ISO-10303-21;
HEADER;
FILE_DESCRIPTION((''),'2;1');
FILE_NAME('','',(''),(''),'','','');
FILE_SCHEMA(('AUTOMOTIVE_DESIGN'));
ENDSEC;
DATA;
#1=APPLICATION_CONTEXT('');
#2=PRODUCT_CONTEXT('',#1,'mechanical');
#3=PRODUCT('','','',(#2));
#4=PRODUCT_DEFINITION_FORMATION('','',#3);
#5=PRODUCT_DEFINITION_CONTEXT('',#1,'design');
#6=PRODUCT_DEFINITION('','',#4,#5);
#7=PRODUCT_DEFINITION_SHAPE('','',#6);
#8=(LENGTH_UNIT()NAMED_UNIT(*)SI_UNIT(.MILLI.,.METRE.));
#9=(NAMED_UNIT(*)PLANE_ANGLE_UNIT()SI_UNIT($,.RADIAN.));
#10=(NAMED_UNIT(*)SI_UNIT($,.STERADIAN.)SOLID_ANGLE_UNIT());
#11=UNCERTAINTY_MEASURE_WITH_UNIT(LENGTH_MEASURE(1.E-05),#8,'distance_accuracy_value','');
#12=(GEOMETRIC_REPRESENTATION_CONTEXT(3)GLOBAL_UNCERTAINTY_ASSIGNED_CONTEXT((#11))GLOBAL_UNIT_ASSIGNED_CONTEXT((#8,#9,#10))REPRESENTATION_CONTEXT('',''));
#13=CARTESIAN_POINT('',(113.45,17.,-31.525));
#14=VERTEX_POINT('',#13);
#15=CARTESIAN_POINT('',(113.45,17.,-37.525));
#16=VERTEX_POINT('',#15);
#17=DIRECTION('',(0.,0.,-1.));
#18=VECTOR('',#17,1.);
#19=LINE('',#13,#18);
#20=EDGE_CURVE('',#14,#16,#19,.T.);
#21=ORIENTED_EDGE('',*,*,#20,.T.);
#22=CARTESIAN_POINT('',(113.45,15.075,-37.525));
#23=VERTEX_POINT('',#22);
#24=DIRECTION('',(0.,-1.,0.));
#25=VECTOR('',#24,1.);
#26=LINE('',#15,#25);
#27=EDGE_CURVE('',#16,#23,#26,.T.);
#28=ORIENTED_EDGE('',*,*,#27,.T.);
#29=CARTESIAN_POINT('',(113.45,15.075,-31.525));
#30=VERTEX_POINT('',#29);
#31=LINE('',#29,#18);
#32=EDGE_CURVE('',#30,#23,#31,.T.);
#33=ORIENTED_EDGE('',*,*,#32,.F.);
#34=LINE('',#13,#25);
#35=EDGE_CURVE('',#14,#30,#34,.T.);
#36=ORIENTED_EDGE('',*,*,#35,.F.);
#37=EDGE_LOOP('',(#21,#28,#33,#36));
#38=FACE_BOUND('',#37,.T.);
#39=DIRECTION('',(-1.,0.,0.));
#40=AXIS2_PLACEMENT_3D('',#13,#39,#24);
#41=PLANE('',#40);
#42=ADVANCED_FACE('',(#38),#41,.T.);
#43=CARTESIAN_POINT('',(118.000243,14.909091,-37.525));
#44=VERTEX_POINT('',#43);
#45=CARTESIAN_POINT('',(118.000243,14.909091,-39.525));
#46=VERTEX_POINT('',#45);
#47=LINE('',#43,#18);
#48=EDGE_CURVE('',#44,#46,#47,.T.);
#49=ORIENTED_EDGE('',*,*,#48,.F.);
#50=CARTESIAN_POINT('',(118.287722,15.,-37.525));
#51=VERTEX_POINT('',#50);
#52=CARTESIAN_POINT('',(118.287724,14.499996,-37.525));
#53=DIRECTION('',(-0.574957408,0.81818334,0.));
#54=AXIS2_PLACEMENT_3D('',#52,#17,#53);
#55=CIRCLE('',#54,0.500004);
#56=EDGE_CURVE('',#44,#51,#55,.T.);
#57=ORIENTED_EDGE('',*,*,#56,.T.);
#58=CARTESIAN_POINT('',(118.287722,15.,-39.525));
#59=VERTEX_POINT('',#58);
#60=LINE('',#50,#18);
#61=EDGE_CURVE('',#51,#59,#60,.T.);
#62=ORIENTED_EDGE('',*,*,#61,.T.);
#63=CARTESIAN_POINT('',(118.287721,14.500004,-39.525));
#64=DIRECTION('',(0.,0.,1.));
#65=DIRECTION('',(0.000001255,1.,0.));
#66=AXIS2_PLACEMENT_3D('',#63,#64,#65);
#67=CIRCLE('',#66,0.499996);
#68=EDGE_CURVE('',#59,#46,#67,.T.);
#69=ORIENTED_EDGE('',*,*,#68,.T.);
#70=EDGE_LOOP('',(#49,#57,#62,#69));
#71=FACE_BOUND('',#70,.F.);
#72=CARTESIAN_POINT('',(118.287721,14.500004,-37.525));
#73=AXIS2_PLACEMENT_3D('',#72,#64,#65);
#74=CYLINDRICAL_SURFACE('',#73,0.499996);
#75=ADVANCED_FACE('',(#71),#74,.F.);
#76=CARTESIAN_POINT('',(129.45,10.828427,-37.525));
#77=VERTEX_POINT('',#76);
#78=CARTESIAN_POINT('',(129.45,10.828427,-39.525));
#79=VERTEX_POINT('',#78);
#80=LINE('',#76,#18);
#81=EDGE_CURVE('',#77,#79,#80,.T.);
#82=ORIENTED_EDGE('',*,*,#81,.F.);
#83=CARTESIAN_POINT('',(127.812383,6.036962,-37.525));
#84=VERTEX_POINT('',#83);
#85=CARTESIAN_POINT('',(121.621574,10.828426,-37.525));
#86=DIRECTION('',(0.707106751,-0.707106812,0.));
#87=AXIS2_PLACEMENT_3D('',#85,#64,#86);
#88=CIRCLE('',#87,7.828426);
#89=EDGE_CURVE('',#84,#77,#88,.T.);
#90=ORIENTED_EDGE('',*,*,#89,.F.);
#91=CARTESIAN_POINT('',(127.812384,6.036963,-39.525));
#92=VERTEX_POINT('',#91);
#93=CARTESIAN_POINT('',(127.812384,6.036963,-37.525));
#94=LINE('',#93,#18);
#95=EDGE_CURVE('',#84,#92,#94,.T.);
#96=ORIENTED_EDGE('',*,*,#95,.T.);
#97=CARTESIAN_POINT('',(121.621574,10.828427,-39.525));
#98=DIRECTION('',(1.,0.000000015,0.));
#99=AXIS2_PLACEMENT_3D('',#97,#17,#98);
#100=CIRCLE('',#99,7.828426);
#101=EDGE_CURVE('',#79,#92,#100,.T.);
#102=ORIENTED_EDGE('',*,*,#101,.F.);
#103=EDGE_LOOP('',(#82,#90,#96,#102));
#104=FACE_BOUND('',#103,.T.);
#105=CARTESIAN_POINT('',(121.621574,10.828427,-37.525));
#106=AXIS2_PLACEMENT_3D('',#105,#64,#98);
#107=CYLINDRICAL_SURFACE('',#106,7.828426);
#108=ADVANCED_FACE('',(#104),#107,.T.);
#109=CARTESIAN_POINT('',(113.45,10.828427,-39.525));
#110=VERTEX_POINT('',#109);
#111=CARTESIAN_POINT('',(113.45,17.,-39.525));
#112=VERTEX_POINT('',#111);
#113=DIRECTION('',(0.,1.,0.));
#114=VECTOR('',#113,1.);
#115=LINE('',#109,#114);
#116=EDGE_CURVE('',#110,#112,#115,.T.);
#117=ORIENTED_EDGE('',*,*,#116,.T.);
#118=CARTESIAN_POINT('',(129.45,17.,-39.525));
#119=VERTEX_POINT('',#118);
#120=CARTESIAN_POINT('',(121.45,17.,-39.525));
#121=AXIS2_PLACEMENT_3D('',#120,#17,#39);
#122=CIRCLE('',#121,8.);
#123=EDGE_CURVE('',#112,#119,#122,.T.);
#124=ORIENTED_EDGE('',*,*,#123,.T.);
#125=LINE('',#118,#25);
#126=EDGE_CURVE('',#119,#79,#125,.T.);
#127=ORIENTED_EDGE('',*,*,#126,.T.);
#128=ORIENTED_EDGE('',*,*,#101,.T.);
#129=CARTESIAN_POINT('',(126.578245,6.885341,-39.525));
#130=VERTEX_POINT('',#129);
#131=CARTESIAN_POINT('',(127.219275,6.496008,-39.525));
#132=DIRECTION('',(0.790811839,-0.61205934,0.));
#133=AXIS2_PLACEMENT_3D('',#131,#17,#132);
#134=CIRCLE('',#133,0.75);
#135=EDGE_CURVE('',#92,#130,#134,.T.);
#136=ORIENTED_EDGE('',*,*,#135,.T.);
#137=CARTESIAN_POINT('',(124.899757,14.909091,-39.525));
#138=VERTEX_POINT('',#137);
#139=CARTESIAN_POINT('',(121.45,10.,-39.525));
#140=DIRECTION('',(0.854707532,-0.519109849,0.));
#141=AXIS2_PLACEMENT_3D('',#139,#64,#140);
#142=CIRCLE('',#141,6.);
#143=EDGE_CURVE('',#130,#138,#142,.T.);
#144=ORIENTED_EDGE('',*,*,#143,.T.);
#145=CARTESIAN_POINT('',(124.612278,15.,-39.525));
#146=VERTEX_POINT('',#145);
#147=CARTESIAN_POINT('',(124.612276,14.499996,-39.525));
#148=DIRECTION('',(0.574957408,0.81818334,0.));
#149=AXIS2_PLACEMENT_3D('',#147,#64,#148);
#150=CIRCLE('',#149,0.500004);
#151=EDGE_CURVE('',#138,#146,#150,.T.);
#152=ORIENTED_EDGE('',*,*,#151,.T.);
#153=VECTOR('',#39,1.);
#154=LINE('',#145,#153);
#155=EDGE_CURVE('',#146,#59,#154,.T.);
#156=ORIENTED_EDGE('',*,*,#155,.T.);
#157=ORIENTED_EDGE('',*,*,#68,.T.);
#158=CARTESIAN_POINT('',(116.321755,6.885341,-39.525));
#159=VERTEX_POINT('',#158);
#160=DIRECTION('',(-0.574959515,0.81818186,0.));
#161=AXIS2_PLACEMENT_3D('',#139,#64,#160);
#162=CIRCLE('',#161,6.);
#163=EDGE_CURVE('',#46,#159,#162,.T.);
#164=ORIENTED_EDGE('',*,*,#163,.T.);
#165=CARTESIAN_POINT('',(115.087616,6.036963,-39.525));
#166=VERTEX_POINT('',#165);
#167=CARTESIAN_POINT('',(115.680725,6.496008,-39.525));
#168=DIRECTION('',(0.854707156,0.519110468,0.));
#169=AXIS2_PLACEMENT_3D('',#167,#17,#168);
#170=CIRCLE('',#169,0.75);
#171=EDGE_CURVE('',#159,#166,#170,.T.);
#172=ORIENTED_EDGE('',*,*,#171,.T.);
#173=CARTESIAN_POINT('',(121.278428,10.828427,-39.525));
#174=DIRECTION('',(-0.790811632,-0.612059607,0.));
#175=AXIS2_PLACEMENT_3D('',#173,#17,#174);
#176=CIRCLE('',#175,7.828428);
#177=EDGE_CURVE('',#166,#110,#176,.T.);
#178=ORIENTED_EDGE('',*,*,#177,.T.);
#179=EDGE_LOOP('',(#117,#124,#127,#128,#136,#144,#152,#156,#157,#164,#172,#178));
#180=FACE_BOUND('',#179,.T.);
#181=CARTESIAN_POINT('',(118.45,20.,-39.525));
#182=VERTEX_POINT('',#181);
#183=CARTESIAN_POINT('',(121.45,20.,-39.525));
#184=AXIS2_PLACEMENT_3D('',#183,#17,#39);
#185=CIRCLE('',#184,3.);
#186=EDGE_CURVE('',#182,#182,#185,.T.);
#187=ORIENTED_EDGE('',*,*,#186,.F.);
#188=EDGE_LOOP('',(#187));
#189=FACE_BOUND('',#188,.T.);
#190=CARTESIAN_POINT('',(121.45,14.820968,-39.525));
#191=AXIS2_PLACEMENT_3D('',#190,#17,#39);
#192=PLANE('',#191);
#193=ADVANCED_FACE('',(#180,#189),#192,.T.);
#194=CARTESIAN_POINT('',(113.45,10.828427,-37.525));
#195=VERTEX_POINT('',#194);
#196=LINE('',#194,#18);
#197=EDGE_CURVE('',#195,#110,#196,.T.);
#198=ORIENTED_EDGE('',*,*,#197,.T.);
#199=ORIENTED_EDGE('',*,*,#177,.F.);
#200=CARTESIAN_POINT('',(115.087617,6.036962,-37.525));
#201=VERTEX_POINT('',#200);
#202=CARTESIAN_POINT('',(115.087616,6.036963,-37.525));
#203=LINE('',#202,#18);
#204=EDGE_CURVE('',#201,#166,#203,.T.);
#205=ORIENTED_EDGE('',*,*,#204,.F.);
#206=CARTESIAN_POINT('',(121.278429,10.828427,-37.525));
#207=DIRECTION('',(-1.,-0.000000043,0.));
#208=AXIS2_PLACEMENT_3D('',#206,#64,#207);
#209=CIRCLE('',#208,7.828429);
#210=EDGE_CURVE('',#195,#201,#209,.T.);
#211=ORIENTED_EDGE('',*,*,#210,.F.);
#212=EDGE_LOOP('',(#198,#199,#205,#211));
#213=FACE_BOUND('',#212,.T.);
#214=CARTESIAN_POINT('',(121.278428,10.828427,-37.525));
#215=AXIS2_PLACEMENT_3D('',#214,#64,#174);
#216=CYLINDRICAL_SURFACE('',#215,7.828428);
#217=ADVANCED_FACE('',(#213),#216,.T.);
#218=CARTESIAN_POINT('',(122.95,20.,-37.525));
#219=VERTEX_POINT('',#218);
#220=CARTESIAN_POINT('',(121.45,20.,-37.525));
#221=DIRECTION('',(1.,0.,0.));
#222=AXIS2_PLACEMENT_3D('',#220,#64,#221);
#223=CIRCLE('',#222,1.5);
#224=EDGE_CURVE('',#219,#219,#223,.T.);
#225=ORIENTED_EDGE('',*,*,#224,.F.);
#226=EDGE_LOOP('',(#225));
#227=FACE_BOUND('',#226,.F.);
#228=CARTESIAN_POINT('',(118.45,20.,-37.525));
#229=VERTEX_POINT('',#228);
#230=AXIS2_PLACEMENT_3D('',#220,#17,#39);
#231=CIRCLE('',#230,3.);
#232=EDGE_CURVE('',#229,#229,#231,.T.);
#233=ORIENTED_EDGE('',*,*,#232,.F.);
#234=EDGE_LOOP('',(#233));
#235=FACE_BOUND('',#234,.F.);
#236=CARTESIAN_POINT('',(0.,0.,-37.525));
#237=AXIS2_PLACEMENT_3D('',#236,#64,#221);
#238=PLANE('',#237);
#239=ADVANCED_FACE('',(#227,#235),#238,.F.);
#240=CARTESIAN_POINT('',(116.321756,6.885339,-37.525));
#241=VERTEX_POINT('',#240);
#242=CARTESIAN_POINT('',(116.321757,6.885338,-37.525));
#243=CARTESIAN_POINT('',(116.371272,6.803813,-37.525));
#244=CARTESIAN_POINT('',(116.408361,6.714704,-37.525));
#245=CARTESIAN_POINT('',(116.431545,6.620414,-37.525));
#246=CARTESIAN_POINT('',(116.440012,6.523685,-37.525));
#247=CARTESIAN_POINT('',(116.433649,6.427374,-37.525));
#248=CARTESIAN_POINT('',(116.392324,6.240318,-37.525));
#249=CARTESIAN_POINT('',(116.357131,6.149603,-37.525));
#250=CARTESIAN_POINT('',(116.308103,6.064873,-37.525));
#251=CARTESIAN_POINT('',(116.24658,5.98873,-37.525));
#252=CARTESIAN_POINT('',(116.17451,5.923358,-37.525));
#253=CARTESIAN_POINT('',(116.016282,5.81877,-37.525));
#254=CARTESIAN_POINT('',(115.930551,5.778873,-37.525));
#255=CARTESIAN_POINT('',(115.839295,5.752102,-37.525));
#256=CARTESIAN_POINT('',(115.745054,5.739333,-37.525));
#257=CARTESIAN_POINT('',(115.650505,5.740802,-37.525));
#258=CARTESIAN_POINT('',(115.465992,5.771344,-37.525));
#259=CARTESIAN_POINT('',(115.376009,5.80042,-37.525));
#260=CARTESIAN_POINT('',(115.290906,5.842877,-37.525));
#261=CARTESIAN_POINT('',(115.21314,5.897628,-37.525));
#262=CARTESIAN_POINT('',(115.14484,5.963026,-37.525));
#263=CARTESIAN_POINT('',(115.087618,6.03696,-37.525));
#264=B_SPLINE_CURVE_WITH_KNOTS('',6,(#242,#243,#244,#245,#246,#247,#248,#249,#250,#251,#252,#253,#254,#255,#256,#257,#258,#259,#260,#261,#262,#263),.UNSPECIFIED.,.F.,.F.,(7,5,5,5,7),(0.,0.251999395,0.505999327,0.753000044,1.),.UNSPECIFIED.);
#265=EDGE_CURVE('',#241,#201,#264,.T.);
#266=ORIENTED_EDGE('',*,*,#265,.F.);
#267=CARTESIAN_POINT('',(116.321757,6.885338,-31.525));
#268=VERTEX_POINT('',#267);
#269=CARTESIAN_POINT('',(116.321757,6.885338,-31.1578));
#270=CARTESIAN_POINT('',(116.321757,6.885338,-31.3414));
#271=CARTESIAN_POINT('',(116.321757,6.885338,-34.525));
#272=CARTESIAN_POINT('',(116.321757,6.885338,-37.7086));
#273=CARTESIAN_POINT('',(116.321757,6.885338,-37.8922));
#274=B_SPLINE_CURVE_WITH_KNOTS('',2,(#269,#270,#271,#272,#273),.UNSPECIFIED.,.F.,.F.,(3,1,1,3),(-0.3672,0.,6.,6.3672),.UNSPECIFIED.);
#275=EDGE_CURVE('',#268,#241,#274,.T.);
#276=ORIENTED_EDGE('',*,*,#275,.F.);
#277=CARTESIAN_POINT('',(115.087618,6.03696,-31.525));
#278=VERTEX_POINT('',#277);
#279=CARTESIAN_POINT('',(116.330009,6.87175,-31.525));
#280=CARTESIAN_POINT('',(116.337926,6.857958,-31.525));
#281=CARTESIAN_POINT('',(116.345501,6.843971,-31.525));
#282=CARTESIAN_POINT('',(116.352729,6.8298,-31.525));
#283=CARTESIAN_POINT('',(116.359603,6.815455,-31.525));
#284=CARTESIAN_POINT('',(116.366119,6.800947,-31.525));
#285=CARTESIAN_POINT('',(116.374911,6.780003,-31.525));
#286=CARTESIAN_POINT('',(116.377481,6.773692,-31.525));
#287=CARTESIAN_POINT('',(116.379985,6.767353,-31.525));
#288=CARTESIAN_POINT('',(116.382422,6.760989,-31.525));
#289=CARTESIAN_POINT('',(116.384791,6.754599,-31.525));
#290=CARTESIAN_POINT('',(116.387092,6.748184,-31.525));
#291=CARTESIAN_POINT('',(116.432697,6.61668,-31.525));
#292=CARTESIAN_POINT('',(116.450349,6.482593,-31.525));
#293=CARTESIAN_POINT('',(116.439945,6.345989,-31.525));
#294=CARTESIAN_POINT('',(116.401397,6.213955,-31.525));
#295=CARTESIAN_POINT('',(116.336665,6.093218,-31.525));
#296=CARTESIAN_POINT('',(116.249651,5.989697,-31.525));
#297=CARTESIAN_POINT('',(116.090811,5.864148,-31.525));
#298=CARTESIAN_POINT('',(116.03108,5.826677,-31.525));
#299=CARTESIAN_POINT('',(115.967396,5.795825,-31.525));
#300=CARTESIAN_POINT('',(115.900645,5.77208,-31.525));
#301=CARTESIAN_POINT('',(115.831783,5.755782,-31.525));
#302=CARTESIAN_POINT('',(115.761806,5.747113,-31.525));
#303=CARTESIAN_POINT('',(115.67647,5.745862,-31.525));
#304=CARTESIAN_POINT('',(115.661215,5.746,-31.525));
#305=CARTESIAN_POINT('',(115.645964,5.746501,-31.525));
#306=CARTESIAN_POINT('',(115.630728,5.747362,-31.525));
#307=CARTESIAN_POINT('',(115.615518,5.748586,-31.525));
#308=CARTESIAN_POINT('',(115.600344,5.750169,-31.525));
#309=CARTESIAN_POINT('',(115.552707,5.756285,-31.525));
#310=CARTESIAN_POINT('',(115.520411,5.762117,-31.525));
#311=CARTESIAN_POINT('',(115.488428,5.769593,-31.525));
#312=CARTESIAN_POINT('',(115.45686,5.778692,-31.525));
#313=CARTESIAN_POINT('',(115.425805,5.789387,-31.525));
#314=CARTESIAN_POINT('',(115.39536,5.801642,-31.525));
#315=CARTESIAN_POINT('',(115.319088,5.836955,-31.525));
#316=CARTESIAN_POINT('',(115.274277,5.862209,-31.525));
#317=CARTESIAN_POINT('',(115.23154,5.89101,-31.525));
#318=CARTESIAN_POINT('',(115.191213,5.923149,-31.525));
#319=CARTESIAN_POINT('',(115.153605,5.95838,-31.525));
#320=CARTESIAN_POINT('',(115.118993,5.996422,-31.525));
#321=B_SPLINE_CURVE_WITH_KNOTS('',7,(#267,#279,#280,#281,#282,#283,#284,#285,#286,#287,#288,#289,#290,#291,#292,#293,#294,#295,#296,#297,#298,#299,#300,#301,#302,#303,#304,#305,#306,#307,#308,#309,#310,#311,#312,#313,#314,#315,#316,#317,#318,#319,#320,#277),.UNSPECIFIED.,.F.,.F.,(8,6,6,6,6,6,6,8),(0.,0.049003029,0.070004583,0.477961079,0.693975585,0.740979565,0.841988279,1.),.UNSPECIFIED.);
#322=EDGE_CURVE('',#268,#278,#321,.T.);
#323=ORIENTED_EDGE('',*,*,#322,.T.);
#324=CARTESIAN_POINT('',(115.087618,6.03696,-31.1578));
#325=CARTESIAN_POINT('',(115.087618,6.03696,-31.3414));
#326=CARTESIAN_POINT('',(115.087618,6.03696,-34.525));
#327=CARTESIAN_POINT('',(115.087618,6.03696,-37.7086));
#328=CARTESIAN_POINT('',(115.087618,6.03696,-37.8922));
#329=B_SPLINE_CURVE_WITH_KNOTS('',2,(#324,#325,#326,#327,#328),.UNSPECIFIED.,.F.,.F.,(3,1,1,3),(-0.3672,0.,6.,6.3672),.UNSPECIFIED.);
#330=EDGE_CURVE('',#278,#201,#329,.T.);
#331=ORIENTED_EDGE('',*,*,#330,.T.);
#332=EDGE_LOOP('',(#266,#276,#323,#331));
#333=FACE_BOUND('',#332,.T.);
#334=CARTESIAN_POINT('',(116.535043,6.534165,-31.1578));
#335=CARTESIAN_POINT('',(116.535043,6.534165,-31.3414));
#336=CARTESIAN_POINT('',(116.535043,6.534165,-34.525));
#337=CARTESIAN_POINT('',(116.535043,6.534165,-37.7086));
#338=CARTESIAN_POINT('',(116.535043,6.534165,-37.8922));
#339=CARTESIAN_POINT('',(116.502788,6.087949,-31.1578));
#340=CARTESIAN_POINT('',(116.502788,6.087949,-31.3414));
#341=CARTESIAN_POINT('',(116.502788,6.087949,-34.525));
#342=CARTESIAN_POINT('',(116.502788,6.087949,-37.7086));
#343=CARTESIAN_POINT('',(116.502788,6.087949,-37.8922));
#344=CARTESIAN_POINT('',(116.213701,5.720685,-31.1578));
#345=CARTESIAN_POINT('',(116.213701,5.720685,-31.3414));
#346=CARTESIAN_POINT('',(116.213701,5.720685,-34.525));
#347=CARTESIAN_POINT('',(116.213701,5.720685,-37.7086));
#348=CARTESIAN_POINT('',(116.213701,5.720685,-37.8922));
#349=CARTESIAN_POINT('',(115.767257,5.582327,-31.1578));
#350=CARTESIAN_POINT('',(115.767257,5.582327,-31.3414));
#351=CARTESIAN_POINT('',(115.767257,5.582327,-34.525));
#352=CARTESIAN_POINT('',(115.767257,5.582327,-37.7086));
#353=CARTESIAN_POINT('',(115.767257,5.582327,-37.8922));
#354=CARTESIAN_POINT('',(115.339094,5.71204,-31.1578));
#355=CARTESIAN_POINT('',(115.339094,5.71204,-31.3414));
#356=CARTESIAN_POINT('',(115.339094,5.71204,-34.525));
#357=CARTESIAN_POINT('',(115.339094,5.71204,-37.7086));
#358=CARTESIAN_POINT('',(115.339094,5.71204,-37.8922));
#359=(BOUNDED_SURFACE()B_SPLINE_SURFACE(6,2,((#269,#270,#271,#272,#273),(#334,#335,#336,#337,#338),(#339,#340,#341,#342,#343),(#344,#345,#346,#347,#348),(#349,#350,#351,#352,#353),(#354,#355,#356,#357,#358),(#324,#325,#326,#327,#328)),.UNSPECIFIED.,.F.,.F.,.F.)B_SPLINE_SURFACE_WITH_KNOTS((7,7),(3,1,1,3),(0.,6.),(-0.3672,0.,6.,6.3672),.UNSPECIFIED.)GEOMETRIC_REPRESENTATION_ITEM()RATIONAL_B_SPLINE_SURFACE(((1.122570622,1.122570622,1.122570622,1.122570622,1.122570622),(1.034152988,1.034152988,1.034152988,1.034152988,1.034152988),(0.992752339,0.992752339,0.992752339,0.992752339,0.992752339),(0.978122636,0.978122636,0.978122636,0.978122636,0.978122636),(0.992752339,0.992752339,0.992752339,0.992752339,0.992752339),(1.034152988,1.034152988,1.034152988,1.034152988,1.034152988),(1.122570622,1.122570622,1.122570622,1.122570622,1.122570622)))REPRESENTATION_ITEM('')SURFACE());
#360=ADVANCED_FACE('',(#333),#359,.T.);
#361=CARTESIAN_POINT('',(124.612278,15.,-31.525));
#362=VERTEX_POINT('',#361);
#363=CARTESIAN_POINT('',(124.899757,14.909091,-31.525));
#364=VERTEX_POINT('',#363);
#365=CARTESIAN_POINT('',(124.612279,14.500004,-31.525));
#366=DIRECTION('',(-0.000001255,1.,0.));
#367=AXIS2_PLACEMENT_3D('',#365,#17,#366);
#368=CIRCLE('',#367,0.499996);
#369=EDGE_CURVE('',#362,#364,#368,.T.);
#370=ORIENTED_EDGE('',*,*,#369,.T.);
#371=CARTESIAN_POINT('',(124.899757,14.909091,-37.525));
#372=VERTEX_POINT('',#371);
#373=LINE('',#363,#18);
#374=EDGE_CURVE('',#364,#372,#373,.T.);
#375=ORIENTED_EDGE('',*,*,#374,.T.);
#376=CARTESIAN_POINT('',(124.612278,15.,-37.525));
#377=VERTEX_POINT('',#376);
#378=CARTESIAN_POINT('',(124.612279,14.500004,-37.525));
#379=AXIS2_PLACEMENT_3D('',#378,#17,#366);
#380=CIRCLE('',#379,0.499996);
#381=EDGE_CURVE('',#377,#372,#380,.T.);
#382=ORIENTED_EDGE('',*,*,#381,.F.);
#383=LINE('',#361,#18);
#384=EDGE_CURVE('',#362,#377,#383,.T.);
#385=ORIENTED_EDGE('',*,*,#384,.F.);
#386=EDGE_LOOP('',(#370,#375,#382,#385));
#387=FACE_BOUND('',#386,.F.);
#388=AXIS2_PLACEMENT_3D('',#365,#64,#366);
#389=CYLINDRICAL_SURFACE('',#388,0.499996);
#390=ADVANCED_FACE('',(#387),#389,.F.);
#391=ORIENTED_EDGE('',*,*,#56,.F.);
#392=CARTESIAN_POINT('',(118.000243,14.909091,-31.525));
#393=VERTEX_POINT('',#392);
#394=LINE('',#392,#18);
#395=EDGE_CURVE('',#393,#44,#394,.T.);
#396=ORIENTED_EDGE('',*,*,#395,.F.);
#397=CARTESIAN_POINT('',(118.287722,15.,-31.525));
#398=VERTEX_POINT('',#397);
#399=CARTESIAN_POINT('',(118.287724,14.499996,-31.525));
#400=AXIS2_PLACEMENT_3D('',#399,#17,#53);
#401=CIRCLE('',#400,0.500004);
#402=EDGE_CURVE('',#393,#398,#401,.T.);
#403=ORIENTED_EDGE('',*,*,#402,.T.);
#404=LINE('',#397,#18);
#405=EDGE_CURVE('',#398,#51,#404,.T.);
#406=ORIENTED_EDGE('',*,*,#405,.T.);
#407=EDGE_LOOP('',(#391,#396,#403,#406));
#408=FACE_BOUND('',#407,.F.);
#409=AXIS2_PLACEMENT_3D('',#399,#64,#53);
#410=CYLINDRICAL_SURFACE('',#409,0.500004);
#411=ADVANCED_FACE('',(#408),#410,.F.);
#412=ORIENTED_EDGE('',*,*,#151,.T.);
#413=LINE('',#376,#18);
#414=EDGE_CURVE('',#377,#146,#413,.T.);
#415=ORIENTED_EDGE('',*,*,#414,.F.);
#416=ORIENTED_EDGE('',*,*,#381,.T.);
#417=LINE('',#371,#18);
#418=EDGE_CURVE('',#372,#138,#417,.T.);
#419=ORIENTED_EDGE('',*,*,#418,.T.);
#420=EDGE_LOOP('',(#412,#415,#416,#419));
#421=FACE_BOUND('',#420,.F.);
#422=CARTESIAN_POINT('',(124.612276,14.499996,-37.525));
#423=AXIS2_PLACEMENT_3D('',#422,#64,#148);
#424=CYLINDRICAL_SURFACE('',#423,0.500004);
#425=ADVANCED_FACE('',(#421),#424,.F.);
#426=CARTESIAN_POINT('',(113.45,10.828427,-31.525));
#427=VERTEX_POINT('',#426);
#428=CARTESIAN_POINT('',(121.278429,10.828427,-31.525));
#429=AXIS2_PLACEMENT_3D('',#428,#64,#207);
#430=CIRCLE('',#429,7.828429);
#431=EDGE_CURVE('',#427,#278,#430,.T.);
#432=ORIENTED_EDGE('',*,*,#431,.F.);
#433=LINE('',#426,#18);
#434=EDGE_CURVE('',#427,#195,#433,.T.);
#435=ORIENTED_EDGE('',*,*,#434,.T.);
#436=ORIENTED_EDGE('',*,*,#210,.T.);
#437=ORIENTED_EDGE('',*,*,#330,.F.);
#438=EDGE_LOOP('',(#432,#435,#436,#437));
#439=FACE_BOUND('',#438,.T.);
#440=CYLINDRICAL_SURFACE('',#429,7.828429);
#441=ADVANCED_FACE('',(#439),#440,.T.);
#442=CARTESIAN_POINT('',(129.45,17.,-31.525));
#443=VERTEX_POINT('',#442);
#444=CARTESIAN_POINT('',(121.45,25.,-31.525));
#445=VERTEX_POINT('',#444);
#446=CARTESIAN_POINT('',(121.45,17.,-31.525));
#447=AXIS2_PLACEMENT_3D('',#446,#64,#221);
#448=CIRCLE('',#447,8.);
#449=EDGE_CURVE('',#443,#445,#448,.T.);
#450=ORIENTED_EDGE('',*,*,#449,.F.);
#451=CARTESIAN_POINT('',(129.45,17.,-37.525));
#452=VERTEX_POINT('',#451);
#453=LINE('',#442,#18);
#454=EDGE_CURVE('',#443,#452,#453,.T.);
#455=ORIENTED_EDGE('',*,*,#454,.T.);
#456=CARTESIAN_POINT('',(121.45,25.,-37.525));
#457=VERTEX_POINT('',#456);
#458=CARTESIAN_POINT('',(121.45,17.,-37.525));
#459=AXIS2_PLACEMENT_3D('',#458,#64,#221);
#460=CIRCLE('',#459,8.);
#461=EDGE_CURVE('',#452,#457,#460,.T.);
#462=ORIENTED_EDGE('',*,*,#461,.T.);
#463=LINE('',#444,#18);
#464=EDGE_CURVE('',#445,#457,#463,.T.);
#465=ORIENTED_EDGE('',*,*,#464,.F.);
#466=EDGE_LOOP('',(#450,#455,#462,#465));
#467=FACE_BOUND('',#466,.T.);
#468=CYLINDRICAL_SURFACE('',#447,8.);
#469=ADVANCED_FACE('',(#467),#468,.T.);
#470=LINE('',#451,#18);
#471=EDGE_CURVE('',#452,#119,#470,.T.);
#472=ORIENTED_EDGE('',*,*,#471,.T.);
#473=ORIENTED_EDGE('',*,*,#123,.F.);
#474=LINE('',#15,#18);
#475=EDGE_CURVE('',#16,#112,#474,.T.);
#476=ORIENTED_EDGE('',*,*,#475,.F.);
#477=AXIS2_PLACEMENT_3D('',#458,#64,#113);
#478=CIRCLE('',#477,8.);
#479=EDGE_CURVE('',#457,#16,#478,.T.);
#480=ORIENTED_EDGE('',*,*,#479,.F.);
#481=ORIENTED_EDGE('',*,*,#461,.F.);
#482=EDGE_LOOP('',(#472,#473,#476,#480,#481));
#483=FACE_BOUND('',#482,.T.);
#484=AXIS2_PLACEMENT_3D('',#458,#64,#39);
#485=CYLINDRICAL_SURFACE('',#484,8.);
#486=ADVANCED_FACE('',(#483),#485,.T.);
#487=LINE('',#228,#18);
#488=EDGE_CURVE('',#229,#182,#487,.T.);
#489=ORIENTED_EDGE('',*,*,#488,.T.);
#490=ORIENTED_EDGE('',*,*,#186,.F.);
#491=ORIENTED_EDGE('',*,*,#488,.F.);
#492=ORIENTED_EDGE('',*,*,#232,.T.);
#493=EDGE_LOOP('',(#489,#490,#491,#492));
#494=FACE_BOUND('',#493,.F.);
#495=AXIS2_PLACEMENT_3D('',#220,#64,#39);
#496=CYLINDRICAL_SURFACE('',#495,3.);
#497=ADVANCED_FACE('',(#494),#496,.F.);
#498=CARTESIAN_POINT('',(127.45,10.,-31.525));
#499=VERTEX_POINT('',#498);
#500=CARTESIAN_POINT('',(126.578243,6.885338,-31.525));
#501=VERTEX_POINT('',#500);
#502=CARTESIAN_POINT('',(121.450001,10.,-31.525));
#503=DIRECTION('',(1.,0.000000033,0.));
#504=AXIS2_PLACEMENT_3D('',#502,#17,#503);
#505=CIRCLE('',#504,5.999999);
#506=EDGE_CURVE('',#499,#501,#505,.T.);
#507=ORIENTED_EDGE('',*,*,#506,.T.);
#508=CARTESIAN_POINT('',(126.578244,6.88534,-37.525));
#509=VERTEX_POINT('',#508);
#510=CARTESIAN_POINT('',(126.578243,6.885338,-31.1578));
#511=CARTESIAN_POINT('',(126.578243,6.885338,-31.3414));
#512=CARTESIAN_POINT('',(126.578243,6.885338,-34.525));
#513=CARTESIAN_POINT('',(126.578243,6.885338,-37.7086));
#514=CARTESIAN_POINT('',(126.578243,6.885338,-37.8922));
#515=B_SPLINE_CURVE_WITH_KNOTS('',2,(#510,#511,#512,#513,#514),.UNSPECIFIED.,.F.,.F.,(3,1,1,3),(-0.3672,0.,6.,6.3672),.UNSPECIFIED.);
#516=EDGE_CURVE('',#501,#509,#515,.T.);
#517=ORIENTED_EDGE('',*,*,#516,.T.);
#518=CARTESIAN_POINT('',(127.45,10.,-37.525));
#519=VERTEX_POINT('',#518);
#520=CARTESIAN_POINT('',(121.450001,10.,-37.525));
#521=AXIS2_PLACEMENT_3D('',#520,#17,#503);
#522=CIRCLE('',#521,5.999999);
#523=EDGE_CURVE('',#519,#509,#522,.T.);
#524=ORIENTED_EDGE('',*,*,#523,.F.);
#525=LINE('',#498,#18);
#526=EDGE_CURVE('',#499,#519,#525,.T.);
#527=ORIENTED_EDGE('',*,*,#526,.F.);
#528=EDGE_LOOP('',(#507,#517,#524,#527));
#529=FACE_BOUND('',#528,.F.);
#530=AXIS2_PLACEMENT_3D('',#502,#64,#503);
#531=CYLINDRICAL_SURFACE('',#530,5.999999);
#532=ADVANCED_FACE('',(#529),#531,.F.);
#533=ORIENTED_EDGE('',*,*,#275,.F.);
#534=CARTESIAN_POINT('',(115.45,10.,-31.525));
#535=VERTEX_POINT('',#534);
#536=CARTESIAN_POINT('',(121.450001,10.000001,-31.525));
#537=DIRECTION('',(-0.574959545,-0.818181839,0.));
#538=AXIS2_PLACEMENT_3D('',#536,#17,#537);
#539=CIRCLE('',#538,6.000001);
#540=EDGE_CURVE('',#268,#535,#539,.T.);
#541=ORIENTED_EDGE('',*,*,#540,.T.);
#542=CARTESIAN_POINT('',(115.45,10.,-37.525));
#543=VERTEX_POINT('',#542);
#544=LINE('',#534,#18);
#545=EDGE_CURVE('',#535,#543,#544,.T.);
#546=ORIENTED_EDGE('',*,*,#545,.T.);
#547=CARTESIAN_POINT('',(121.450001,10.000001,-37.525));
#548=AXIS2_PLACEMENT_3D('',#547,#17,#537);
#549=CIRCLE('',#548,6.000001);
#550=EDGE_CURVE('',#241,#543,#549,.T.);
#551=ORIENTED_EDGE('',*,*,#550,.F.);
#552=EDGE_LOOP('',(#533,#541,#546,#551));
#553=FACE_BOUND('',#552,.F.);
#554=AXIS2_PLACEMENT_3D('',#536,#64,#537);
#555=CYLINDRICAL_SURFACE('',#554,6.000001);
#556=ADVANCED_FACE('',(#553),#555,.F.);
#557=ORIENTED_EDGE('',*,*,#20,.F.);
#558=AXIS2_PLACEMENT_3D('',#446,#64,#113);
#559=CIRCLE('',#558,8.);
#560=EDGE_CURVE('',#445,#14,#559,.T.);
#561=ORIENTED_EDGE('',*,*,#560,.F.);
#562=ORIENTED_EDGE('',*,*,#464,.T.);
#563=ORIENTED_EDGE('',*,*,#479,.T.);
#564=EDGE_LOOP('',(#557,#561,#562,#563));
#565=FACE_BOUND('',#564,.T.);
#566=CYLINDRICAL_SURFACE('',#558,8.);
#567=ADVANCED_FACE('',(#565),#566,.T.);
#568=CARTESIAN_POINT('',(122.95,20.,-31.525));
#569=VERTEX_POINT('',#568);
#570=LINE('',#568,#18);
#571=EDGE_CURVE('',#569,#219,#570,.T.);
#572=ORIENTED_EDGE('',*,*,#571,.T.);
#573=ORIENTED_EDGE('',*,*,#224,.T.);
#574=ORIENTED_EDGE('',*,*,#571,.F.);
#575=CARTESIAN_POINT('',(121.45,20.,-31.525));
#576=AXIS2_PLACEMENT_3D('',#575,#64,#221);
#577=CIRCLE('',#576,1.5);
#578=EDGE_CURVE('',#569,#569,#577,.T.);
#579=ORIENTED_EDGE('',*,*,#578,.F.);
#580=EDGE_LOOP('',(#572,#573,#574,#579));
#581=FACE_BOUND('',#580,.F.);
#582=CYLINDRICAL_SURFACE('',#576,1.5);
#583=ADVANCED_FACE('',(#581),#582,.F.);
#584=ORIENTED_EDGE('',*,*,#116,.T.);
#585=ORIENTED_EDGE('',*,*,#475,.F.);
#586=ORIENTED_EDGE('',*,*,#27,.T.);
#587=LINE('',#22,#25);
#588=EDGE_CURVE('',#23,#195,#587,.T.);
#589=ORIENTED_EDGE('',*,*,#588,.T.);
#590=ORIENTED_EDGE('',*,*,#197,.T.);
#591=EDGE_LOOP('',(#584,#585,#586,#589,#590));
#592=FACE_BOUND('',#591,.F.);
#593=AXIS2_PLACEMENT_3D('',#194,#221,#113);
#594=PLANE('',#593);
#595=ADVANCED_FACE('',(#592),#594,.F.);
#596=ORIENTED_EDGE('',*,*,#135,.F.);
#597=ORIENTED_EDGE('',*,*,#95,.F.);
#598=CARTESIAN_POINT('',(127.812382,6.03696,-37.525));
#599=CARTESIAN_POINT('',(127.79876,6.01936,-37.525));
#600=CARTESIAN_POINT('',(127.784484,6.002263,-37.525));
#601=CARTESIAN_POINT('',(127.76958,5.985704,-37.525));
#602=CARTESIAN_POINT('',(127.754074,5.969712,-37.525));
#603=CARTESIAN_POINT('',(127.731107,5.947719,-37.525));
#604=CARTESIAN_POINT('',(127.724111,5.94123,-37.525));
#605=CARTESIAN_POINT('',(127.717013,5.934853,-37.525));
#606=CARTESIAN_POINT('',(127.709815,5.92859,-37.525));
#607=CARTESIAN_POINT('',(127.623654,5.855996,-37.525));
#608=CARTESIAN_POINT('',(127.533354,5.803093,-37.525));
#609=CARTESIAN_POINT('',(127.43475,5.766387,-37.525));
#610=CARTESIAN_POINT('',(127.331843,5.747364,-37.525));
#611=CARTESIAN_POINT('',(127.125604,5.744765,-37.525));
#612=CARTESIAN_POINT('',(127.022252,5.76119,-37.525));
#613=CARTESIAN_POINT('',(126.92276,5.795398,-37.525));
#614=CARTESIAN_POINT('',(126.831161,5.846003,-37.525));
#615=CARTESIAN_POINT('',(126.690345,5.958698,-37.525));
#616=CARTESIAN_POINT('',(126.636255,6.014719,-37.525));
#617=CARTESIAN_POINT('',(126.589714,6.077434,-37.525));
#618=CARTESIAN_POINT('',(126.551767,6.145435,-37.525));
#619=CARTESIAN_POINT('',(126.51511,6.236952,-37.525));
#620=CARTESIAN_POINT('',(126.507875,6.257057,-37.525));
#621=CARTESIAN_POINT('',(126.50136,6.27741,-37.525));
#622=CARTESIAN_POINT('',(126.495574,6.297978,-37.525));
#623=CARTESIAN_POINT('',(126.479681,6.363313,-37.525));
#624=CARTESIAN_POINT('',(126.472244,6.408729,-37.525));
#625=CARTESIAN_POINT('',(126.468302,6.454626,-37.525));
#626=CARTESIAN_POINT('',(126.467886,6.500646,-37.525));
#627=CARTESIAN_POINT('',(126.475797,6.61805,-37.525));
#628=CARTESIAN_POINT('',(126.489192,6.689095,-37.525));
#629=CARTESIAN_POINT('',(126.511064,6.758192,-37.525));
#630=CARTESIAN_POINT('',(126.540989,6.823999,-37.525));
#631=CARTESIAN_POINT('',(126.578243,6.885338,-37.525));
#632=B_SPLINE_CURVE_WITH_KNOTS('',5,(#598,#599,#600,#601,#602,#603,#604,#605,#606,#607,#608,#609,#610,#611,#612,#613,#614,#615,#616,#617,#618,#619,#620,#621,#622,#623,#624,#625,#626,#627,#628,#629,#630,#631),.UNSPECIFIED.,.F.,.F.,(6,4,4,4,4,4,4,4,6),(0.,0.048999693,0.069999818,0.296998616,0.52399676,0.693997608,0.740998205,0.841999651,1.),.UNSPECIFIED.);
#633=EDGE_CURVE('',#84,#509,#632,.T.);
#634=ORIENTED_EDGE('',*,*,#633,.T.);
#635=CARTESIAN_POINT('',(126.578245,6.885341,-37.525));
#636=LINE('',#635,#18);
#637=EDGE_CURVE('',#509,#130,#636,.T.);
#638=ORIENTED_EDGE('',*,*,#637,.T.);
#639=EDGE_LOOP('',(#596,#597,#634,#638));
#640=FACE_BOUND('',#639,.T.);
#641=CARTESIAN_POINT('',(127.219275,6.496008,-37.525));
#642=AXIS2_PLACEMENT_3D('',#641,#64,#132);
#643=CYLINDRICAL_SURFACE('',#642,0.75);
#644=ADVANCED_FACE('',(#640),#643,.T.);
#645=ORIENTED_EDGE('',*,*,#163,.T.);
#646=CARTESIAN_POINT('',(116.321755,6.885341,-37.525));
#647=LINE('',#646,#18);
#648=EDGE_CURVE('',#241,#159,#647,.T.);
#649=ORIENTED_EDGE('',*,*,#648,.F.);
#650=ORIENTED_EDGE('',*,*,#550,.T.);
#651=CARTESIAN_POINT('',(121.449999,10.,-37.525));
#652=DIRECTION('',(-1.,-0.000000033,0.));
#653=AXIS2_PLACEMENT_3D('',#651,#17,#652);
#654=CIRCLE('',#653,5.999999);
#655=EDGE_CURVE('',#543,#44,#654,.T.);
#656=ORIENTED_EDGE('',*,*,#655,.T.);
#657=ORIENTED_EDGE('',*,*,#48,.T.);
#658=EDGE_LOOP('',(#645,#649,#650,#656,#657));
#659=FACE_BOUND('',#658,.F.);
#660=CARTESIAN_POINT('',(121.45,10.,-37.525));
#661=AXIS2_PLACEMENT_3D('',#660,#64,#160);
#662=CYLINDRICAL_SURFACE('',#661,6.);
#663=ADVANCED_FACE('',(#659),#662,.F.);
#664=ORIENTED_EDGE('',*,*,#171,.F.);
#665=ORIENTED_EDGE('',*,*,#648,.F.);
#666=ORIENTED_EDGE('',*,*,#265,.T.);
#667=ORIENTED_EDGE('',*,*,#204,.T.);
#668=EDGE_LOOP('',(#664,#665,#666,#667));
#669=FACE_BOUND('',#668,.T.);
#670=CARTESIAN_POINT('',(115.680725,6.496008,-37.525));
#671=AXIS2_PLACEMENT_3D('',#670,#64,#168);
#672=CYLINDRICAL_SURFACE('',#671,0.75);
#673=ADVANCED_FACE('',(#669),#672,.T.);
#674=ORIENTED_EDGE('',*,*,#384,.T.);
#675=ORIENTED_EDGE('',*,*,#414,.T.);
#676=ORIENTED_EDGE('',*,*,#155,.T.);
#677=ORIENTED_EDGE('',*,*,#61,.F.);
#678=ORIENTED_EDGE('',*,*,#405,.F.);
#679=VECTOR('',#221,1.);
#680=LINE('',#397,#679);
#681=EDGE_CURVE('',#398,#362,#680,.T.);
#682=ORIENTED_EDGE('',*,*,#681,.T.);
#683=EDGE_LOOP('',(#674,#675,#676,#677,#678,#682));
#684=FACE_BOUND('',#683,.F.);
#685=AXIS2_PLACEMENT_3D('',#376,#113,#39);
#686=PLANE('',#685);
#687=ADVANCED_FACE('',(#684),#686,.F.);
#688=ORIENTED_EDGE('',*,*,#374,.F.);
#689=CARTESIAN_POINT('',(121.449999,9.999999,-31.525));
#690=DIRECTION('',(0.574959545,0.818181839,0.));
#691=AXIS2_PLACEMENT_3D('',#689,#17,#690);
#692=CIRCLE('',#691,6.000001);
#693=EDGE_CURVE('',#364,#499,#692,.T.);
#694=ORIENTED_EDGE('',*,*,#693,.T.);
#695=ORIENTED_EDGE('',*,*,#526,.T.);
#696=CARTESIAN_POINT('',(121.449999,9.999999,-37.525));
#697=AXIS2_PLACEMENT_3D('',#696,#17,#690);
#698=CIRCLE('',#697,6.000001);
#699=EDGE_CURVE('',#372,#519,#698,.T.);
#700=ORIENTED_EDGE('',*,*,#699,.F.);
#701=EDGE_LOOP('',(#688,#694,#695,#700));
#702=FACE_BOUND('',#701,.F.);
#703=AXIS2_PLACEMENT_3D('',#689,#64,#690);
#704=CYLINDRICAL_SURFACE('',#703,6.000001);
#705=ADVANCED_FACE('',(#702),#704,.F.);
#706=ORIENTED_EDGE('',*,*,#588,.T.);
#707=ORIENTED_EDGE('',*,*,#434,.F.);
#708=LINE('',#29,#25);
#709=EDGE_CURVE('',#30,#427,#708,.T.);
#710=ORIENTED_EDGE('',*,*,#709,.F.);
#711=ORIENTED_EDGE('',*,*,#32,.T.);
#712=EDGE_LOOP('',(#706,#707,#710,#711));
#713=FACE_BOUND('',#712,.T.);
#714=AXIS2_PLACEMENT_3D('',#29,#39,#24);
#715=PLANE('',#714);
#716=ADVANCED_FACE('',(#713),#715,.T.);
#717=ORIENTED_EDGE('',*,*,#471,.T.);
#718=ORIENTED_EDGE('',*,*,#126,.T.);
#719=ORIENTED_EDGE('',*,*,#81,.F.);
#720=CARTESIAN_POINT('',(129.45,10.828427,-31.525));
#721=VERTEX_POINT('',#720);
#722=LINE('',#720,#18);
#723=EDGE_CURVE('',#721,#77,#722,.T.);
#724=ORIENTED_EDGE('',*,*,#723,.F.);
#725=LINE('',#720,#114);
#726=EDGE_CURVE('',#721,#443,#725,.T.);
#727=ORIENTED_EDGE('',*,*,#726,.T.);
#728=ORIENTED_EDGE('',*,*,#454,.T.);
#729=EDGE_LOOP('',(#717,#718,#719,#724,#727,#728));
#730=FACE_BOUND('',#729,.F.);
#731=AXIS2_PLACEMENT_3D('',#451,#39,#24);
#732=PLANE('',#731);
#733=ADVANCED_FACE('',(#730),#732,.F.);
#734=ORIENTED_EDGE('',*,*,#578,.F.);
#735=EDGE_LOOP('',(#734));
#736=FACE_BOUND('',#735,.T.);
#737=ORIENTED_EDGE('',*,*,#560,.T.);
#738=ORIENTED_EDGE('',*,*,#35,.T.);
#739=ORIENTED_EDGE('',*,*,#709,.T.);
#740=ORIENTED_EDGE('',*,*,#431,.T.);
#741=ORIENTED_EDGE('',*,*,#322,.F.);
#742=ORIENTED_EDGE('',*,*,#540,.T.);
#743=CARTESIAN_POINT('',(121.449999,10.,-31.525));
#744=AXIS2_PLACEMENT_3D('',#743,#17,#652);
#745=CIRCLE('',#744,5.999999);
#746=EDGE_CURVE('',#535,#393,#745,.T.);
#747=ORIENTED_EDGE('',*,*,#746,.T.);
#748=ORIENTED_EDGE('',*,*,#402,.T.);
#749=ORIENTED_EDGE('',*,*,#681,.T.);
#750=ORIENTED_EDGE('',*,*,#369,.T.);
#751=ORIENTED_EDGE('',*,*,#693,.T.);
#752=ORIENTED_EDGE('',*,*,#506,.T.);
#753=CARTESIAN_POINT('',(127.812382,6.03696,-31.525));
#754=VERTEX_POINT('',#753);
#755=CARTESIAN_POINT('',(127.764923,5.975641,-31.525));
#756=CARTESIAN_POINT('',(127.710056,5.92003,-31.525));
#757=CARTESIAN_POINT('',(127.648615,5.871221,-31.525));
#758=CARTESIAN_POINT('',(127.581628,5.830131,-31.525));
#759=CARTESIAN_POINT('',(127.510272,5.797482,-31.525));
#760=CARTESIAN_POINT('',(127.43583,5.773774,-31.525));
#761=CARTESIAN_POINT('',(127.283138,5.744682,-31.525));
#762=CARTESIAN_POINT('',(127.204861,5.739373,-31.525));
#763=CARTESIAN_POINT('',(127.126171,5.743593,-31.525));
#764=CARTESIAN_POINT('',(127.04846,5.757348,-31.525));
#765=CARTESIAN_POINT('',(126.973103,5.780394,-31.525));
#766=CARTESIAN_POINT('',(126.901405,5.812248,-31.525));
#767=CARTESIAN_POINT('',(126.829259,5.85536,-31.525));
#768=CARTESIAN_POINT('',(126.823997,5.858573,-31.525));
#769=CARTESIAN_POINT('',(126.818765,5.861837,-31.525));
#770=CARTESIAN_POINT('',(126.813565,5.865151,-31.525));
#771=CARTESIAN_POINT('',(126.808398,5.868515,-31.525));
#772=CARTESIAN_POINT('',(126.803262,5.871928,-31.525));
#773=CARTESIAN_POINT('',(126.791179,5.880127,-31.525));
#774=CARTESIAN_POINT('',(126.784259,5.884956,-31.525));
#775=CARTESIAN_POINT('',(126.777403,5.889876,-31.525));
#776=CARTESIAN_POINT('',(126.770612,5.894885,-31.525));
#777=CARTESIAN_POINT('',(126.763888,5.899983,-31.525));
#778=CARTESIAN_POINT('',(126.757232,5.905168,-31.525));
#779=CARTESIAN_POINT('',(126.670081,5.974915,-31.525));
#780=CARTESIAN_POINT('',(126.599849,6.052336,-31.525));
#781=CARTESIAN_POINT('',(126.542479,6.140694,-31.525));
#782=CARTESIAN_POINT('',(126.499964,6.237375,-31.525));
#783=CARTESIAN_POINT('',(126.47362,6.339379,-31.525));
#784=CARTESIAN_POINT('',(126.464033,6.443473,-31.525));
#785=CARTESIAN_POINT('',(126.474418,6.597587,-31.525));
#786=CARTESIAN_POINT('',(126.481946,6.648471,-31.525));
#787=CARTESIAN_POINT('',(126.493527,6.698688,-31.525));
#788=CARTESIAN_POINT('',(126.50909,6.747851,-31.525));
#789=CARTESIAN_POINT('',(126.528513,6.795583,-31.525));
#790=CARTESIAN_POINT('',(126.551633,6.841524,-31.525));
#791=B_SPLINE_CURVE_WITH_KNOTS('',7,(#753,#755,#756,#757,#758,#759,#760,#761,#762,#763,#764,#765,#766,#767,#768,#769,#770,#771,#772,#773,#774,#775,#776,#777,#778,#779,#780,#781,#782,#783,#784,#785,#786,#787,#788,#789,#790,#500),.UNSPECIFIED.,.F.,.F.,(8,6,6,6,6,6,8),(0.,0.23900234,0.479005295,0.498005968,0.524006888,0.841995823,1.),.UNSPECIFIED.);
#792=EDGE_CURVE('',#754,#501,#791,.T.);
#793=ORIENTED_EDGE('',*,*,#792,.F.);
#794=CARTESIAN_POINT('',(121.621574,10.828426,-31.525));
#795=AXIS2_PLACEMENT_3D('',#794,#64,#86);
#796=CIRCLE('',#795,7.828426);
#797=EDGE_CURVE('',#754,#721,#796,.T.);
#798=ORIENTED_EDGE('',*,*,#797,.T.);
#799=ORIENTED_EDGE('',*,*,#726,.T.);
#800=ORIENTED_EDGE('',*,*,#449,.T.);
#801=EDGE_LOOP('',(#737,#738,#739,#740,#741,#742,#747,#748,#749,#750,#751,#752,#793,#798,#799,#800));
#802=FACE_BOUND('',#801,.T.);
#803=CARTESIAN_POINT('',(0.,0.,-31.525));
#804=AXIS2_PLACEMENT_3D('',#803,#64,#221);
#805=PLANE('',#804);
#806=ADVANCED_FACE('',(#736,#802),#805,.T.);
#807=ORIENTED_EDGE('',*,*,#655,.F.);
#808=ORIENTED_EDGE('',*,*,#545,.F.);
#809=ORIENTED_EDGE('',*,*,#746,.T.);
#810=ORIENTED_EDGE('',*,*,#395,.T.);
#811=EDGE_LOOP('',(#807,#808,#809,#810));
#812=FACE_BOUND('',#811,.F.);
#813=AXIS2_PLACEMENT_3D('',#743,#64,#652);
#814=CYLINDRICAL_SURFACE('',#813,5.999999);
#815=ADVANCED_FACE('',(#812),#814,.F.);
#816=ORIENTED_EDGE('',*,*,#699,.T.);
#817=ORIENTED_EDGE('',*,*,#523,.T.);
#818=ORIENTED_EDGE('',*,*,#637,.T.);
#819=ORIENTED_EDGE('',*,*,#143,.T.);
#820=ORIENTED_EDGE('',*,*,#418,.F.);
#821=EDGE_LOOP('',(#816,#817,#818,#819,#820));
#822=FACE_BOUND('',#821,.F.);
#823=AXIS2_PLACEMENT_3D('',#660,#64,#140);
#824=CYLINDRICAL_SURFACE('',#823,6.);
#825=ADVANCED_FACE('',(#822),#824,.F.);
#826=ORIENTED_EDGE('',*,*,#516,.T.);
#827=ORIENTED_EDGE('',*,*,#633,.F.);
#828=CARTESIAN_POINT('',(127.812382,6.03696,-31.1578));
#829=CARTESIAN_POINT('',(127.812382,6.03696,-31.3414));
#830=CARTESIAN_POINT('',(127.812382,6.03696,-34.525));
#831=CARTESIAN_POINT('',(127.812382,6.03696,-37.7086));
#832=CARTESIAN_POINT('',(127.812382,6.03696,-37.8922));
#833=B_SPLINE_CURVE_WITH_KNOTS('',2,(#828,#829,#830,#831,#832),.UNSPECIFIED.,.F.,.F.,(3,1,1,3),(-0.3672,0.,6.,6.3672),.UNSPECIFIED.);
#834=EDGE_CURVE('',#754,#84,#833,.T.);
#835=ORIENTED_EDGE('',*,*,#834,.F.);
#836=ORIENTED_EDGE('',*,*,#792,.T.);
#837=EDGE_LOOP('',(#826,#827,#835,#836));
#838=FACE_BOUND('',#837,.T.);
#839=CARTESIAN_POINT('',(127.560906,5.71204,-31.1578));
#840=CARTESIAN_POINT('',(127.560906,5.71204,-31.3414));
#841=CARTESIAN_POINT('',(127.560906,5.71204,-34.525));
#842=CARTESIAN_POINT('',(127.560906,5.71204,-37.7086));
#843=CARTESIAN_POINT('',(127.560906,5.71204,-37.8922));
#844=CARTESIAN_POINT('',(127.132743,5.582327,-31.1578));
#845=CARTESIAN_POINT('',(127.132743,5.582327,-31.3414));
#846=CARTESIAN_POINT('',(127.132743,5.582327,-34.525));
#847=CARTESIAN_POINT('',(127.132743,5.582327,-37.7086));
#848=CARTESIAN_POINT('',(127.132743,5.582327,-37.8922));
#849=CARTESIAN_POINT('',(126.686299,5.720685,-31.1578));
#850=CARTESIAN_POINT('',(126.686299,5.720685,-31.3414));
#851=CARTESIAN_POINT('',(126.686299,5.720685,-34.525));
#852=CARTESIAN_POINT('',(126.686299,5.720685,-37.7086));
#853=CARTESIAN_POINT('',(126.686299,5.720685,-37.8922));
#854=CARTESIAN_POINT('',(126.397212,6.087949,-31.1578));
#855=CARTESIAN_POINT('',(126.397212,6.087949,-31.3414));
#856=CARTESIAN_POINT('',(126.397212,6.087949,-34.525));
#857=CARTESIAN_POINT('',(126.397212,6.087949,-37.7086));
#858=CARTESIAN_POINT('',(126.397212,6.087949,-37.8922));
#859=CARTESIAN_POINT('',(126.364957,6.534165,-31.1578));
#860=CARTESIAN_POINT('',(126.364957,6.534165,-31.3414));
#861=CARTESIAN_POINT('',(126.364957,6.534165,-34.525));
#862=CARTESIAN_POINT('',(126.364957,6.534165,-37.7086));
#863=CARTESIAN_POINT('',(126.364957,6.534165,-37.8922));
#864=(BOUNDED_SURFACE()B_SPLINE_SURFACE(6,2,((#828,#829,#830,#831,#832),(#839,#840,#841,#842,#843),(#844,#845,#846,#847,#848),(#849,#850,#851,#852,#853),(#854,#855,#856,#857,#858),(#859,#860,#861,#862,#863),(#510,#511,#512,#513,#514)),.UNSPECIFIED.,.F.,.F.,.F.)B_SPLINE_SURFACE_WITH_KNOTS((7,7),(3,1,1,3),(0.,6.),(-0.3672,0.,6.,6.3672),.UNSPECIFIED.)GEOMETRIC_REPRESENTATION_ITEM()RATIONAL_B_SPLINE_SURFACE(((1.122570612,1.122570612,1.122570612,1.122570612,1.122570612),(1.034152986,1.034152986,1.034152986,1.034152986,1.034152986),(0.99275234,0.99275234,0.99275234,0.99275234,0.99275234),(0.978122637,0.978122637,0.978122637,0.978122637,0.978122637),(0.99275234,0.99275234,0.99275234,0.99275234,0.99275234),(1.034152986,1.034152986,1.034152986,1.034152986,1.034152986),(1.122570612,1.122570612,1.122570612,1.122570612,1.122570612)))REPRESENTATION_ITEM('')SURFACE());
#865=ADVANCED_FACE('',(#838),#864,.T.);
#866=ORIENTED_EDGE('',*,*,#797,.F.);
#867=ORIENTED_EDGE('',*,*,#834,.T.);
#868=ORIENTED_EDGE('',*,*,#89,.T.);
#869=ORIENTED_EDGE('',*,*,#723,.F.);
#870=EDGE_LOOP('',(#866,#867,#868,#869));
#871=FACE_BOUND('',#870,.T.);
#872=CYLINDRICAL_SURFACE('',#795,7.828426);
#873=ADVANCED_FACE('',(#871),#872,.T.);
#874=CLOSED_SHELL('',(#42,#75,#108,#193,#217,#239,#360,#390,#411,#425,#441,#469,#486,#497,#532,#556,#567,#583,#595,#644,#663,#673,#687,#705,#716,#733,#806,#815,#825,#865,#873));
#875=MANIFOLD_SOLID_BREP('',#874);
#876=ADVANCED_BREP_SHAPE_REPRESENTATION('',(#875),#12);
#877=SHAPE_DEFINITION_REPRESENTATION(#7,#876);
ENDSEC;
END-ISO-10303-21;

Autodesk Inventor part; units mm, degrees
ref_plane "YZ Plane" through (0, 0, 0) normal (1, 0, 0) x (0, 1, 0)
ref_plane "XZ Plane" through (0, 0, 0) normal (0, 1, 0) x (-1, 0, 0)
sketch "Sketch1" plane through (0, 0, 0) normal (0, 0, 1) x (1, 0, 0)
  line L0 (127.525, 5) -> (129.95, 5)
  line L1 (127.525, 15.075) -> (127.525, 5)
  line L2 (115.375, 15.075) -> (127.525, 15.075)
  line L3 (115.375, 5) -> (115.375, 15.075)
  line L4 (112.95, 5) -> (115.375, 5)
  line L5 (129.95, 5) -> (129.95, 25.025)
  line L6 (115.45, 10) -> (115.45, 6)
  arc A0 (115.45, 10) -> (118.000243, 5.090909) centre (121.45, 10) ccw
  arc A1 (118.000243, 5.090909) -> (118.287722, 5) centre (118.287722, 5.5) ccw
  line L7 (116.45, 5) -> (118.287722, 5)
  arc A2 (115.45, 6) -> (116.45, 5) centre (116.45, 6) ccw
  line L8 (118.287722, 15) -> (116.45, 15)
  arc A3 (118.287722, 15) -> (118.000243, 14.909091) centre (118.287722, 14.5) ccw
  arc A4 (118.000243, 14.909091) -> (115.45, 10) centre (121.45, 10) ccw
  line L9 (115.45, 14) -> (115.45, 10)
  arc A5 (116.45, 15) -> (115.45, 14) centre (116.45, 14) ccw
  line L10 (127.45, 10) -> (127.45, 14)
  arc A6 (127.45, 10) -> (124.899757, 14.909091) centre (121.45, 10) ccw
  arc A7 (124.899757, 14.909091) -> (124.612278, 15) centre (124.612278, 14.5) ccw
  line L11 (126.45, 15) -> (124.612278, 15)
  arc A8 (127.45, 14) -> (126.45, 15) centre (126.45, 14) ccw
  line L12 (124.612278, 5) -> (126.45, 5)
  arc A9 (124.612278, 5) -> (124.899757, 5.090909) centre (124.612278, 5.5) ccw
  arc A10 (124.899757, 5.090909) -> (127.45, 10) centre (121.45, 10) ccw
  line L13 (127.45, 6) -> (127.45, 10)
  arc A11 (126.45, 5) -> (127.45, 6) centre (126.45, 6) ccw
  arc A12 (118.000243, 5.090909) -> (118.287722, 5) centre (118.287722, 5.5) ccw
  arc A13 (118.000243, 14.909091) -> (118.000243, 5.090909) centre (121.45, 10) ccw
  arc A14 (118.287722, 15) -> (118.000243, 14.909091) centre (118.287722, 14.5) ccw
  line L14 (118.287722, 15) -> (124.612278, 15)
  arc A15 (124.899757, 14.909091) -> (124.612278, 15) centre (124.612278, 14.5) ccw
  arc A16 (124.899757, 5.090909) -> (124.899757, 14.909091) centre (121.45, 10) ccw
  arc A17 (124.612278, 5) -> (124.899757, 5.090909) centre (124.612278, 5.5) ccw
  line L15 (124.612278, 5) -> (118.287722, 5)
  line L16 (127.45, 15.075) -> (129.45, 15.075)
  line L17 (129.45, 15.075) -> (129.45, 5)
  line L18 (129.45, 5) -> (127.45, 5)
  line L19 (127.45, 5) -> (127.45, 15.075)
  line L20 (121.45, 10) -> (121.45, 5)
  arc A18 (127.157107, 5.292893) -> (129.45, 10.828427) centre (121.621573, 10.828427) ccw
  line L21 (115.45, 15.075) -> (113.45, 15.075)
  line L22 (113.45, 15.075) -> (113.45, 5)
  line L23 (113.45, 5) -> (115.45, 5)
  line L24 (115.45, 5) -> (115.45, 15.075)
  arc A19 (113.45, 10.828427) -> (115.742893, 5.292893) centre (121.278427, 10.828427) ccw
  line L25 (121.45, 25) -> (121.45, 15)
  circle A20 centre (121.45, 20) radius 1.5
  circle A21 centre (121.45, 20) radius 3
  line L26 (129.45, 15) -> (113.45, 15)
  line L27 (113.45, 15) -> (113.45, 25)
  line L28 (113.45, 25) -> (129.45, 25)
  line L29 (129.45, 25) -> (129.45, 15)
  arc A22 (129.45, 17) -> (121.45, 25) centre (121.45, 17) ccw
  arc A23 (121.45, 25) -> (113.45, 17) centre (121.45, 17) ccw
  circle A24 centre (121.45, 20) radius 1.4375
  line L30 (129.95, 25.025) -> (112.95, 25.025)
  line L31 (112.95, 25.025) -> (112.95, 5)
  point P0 (0, 0)
  point P1 (112.95, 16.464466)
  point P2 (115.742893, 5.292893)
  point P3 (127.45, 5.602175)
  point P4 (115.45, 5.602175)
  point P5 (115.45, 15)
  point P6 (127.45, 15)
  dimension "d0" = 2
  dimension "d2" = 3
  dimension "d3" = 6
  dimension "d10" = 10
ref_plane "Work Plane1" through (127.525, 15.075, -31.525) normal (0, 0, -1) x (-1, 0, 0)
sketch "Sketch1 outline for Extrusion1" plane through (0, 0, 0) normal (0, 0, 1) x (1, 0, 0)
  arc A0 (124.612278, 15) -> (124.899757, 14.909091) centre (124.612278, 14.5) cw
  line L0 (118.287722, 15) -> (124.612278, 15)
  arc A1 (124.899757, 14.909091) -> (127.45, 10) centre (121.45, 10) cw
  arc A2 (118.000243, 14.909091) -> (118.287722, 15) centre (118.287722, 14.5) cw
  arc A3 (127.45, 10) -> (124.899757, 5.090909) centre (121.45, 10) cw
  arc A4 (115.45, 10) -> (118.000243, 14.909091) centre (121.45, 10) cw
  arc A5 (124.899757, 5.090909) -> (124.612278, 5) centre (124.612278, 5.5) cw
  arc A6 (118.000243, 5.090909) -> (115.45, 10) centre (121.45, 10) cw
  line L1 (124.612278, 5) -> (126.45, 5)
  arc A7 (118.287722, 5) -> (118.000243, 5.090909) centre (118.287722, 5.5) cw
  arc A8 (126.45, 5) -> (127.157107, 5.292893) centre (126.45, 6) ccw
  line L2 (116.45, 5) -> (118.287722, 5)
  arc A9 (127.157107, 5.292893) -> (129.45, 10.828427) centre (121.621573, 10.828427) ccw
  arc A10 (115.742893, 5.292893) -> (116.45, 5) centre (116.45, 6) ccw
  line L3 (129.45, 10.828427) -> (129.45, 15.075)
  arc A11 (113.45, 10.828427) -> (115.742893, 5.292893) centre (121.278427, 10.828427) ccw
  line L4 (129.45, 15.075) -> (129.45, 17)
  line L5 (113.45, 15.075) -> (113.45, 10.828427)
  arc A12 (129.45, 17) -> (121.45, 25) centre (121.45, 17) ccw
  line L6 (113.45, 17) -> (113.45, 15.075)
  arc A13 (121.45, 25) -> (113.45, 17) centre (121.45, 17) ccw
  circle A14 centre (121.45, 20) radius 1.5
extrude "Extrusion1" add sketch "Sketch1 outline for Extrusion1" against normal blind 6 from surface at -31.525
fillet "Fillet1" radius 0.75 4 edges at (124.8998, 5.0909, -34.525) (118.0002, 5.0909, -34.525) (124.6123, 5, -34.525) (118.2877, 5, -34.525)
sketch "Sketch2" plane through (121.45, 14.820968, -37.525) normal (0, 0, -1) x (-1, 0, 0)
  arc A0 (6.362384, -8.784005) -> (8, -3.992541) centre (0.171573, -3.992541) ccw
  line L0 (8, 2.179032) -> (8, -3.992541)
  line L1 (-8, -3.992541) -> (-8, 2.179032)
  arc A1 (-8, -3.992541) -> (-6.362384, -8.784005) centre (-0.171573, -3.992541) ccw
  arc A2 (-3.449757, 0.088123) -> (-5.128245, -7.935627) centre (0, -4.820968) ccw
  arc A3 (-3.162278, 0.179032) -> (-3.449757, 0.088123) centre (-3.162278, -0.320968) ccw
  arc A4 (3.449757, 0.088123) -> (3.162278, 0.179032) centre (3.162278, -0.320968) ccw
  arc A5 (5.128245, -7.935627) -> (3.449757, 0.088123) centre (0, -4.820968) ccw
  circle A6 centre (0, 5.179032) radius 3
  line L2 (3.162278, 0.179032) -> (-3.162278, 0.179032)
  circle A7 centre (0, 5.179032) radius 1.5
  arc A8 (8, 2.179032) -> (-8, 2.179032) centre (0, 2.179032) ccw
  arc A9 (5.128245, -7.935627) -> (6.362384, -8.784005) centre (5.769275, -8.32496) ccw
  arc A10 (-6.362384, -8.784005) -> (-5.128245, -7.935627) centre (-5.769275, -8.32496) ccw
  point P0 (121.45, -14.820968)
  dimension "d7" = 6
sketch "Sketch2 outline for Extrusion2" plane through (121.45, 14.820968, -37.525) normal (0, 0, -1) x (-1, 0, 0)
  arc A0 (5.128245, -7.935627) -> (6.362384, -8.784005) centre (5.769275, -8.32496) ccw
  arc A1 (3.449757, 0.088123) -> (5.128245, -7.935627) centre (0, -4.820968) cw
  arc A2 (6.362384, -8.784005) -> (8, -3.992541) centre (0.171573, -3.992541) ccw
  arc A3 (3.162278, 0.179032) -> (3.449757, 0.088123) centre (3.162278, -0.320968) cw
  line L0 (8, -3.992541) -> (8, 2.179032)
  line L1 (-3.162278, 0.179032) -> (3.162278, 0.179032)
  arc A4 (8, 2.179032) -> (-8, 2.179032) centre (0, 2.179032) ccw
  arc A5 (-3.449757, 0.088123) -> (-3.162278, 0.179032) centre (-3.162278, -0.320968) cw
  line L2 (-8, 2.179032) -> (-8, -3.992541)
  arc A6 (-5.128245, -7.935627) -> (-3.449757, 0.088123) centre (0, -4.820968) cw
  arc A7 (-8, -3.992541) -> (-6.362384, -8.784005) centre (-0.171573, -3.992541) ccw
  arc A8 (-6.362384, -8.784005) -> (-5.128245, -7.935627) centre (-5.769275, -8.32496) ccw
  circle A9 centre (0, 5.179032) radius 3
extrude "Extrusion2" add sketch "Sketch2 outline for Extrusion2" along normal blind 2
properties part number "Y Stage Motor Clamp V5"
